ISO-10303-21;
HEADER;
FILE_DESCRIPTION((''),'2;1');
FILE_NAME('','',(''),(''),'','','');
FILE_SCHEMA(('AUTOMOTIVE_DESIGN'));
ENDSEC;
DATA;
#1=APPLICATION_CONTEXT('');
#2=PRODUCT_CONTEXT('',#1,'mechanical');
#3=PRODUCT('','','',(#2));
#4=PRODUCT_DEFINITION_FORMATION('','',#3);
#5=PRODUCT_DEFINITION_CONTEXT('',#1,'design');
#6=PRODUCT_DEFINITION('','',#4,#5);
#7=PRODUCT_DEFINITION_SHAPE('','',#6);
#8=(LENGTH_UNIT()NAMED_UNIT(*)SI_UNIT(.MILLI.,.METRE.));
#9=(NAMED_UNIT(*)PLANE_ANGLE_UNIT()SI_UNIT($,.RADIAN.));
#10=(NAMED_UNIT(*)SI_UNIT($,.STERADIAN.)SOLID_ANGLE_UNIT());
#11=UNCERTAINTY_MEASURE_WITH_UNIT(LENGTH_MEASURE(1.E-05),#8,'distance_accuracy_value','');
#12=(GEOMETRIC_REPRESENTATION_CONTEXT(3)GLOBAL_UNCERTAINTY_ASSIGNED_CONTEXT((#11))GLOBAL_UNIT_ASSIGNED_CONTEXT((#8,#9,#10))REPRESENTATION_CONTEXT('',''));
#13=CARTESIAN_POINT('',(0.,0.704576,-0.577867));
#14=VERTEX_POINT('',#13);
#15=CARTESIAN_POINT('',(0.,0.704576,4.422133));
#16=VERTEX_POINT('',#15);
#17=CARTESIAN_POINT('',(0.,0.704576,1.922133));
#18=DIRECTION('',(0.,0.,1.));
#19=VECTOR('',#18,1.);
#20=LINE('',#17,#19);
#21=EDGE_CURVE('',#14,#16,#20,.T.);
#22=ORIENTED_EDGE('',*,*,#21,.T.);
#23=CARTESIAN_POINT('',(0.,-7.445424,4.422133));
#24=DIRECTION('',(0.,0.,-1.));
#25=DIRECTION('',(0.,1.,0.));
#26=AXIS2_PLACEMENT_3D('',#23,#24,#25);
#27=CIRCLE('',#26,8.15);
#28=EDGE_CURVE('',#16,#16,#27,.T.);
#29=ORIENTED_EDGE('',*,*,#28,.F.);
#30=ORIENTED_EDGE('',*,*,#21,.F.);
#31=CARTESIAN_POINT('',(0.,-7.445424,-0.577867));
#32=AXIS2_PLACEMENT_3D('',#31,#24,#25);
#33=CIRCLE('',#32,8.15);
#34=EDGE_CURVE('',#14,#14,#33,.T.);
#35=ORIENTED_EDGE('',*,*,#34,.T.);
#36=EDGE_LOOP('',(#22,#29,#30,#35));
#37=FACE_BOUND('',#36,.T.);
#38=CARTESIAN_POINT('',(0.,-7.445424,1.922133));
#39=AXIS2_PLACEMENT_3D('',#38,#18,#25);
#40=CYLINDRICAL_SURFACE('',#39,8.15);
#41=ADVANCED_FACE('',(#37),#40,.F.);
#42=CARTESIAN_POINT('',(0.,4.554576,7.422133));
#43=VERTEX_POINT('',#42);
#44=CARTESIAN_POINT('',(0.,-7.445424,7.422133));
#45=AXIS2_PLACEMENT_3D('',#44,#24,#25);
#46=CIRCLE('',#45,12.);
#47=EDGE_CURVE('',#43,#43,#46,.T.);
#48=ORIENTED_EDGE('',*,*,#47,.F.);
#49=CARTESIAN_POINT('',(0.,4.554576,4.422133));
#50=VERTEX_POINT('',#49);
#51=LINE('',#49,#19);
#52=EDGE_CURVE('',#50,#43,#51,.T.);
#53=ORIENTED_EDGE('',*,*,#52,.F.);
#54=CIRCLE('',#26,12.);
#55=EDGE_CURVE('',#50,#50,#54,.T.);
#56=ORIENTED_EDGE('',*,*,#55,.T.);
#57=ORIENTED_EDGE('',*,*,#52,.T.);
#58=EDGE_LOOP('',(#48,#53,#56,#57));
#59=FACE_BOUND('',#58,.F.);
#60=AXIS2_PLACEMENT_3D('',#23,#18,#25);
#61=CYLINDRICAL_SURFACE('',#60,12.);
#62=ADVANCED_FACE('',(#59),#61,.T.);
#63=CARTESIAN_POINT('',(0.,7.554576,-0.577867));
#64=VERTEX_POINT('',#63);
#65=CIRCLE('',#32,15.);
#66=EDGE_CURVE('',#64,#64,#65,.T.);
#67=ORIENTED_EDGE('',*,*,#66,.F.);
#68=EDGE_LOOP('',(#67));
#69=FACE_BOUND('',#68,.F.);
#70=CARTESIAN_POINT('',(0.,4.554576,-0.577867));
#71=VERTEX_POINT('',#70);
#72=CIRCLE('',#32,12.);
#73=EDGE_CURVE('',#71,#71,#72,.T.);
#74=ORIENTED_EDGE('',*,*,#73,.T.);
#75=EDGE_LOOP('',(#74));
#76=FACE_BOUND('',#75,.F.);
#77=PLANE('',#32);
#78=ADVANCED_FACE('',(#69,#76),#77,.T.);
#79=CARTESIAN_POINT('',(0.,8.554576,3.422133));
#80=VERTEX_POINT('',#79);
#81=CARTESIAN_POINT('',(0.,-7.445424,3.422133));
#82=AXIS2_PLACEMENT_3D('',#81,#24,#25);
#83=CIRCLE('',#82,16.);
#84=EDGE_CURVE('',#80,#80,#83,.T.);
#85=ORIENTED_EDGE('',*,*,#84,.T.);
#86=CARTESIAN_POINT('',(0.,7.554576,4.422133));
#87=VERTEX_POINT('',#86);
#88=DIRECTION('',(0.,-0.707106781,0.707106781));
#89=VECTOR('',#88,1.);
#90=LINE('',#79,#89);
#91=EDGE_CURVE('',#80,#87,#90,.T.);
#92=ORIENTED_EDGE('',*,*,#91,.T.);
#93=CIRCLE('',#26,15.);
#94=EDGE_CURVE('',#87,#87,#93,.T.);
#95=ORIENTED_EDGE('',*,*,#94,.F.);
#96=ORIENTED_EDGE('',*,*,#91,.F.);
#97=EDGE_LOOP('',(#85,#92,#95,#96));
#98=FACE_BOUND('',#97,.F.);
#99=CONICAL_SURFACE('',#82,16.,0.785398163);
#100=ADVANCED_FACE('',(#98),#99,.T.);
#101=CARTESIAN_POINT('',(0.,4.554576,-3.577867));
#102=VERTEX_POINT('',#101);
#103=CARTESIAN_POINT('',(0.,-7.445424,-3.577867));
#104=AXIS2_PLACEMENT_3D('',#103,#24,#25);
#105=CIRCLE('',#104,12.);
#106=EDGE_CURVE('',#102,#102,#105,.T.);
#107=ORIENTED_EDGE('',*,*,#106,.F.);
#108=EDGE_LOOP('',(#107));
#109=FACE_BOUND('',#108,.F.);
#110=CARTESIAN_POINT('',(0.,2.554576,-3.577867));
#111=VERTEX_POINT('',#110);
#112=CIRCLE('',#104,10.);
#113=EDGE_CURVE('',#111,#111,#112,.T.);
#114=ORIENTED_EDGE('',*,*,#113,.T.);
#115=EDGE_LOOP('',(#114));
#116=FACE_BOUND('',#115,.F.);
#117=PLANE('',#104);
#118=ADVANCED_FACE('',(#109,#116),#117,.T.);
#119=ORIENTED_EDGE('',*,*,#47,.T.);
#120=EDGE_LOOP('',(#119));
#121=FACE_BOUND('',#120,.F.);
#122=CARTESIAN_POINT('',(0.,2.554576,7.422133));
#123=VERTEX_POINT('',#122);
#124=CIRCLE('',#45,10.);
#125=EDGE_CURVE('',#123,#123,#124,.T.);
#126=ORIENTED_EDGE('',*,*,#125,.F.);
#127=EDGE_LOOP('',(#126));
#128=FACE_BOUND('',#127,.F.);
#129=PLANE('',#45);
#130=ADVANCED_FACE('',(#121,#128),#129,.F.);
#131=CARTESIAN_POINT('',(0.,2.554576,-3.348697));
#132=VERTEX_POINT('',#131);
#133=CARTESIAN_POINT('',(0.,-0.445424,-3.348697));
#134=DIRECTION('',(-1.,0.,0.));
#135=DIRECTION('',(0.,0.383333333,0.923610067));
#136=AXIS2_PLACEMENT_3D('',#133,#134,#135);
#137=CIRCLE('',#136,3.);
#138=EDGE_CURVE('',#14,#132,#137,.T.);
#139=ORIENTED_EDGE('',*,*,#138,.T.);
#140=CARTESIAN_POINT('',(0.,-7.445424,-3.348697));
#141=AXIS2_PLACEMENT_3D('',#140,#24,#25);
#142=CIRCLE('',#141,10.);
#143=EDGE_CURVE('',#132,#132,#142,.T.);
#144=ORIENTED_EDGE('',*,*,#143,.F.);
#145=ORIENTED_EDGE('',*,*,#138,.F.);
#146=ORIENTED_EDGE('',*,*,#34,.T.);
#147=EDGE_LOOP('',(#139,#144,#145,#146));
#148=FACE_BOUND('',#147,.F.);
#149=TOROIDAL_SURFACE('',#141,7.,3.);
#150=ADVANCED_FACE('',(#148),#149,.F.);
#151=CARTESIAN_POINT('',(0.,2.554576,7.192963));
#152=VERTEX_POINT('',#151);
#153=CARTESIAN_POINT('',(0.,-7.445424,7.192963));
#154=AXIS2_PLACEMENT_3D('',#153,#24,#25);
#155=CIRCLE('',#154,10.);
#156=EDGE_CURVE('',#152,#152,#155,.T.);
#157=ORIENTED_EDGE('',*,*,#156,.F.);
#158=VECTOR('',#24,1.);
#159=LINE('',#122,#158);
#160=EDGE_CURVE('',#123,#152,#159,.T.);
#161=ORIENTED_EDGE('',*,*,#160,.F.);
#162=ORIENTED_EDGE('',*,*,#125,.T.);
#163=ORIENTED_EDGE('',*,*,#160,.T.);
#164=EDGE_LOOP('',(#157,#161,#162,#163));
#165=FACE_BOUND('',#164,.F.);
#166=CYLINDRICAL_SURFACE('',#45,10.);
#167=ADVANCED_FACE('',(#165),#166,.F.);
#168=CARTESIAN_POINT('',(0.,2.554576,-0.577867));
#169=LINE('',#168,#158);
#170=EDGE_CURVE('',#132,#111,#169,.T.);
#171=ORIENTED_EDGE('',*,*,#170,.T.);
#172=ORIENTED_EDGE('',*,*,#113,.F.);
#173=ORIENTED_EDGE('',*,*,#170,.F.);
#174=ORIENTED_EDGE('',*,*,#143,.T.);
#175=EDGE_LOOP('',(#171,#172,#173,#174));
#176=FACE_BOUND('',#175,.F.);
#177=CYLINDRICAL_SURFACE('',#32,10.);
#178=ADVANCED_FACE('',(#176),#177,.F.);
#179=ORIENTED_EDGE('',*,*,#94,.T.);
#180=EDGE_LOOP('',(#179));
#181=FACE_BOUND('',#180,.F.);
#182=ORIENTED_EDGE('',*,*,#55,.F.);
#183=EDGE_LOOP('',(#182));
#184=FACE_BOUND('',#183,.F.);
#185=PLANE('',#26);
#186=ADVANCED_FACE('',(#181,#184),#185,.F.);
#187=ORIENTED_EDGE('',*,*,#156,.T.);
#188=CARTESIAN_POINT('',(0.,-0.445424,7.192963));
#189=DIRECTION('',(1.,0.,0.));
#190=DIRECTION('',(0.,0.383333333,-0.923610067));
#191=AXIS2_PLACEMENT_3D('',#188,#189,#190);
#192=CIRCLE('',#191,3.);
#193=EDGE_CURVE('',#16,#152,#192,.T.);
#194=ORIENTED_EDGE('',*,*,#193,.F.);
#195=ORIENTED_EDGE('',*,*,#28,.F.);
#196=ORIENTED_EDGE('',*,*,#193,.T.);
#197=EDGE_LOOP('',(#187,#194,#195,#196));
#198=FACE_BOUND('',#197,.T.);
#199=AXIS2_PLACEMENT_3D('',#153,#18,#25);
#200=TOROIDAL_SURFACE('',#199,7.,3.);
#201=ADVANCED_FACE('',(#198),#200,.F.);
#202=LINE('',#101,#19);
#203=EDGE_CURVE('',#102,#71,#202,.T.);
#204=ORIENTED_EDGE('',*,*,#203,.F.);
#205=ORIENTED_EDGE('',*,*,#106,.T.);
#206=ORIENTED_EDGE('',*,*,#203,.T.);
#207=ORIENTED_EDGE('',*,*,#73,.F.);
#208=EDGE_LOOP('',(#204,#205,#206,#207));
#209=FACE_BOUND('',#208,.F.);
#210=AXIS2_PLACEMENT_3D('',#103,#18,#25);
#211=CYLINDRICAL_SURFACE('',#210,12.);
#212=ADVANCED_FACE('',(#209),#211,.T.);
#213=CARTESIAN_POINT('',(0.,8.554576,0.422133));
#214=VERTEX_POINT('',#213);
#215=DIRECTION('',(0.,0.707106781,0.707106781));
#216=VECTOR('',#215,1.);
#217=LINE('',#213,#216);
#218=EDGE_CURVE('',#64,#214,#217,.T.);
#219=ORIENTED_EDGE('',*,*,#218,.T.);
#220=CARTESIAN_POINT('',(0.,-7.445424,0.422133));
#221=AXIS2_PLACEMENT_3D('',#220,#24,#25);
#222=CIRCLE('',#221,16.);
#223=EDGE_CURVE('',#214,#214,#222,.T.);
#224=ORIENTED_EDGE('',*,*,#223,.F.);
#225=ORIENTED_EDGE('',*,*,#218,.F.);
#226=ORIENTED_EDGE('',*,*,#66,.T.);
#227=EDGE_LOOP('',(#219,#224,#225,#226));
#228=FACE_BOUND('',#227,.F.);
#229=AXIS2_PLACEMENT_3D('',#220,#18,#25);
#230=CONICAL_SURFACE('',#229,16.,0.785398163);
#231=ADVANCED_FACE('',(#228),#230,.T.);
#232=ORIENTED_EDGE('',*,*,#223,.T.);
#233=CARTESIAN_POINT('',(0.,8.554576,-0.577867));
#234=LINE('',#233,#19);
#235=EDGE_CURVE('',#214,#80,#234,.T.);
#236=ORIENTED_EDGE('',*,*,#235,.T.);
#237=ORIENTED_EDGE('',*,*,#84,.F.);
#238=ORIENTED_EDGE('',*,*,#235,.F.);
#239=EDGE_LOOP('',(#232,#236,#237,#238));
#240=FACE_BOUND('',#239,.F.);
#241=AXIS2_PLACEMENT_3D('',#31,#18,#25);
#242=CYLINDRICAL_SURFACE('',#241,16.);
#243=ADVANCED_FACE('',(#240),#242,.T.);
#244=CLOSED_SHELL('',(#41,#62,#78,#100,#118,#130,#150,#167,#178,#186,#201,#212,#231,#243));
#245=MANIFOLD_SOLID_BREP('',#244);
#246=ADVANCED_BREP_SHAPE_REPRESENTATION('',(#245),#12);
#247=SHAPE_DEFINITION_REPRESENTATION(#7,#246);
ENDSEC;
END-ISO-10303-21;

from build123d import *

# Parameters (mm, degrees)
F0_W    = 1.85
F0_H    = 5
F3_SIZE = 1


# Not quite as in the source:
# - a fillet or chamfer that OpenCascade refuses, or shapes differently, is made with other operations: its cross-section is extruded or revolved along the edge and cut away or added


with BuildPart() as f1:
    # F0 (on Right) → F1 (revolve)
    with BuildSketch(Plane.YZ):
        with Locations((1.6295755848, 1.9221331838)):
            Rectangle(F0_W, F0_H)
        Polygon((2.5545755848, 7.4221331838), (2.5545755848, 4.4221331838), (2.5545755848, -0.5778668162), (2.5545755848, -3.5778668162), (4.5545755848, -3.5778668162), (4.5545755848, -0.5778668162), (8.5545755848, -0.5778668162), (8.5545755848, 4.4221331838), (4.5545755848, 4.4221331838), (4.5545755848, 7.4221331838), align=None)
    revolve(axis=Axis((0, -7.4454244152, 1.9221331838), (0, 0, -1)))

    # F2: fillet of radius 3 on 2 edges, made by hand

    # F2_s1 → F2_t2 (revolve)
    with BuildSketch(Plane.YZ):
        with BuildLine():
            ThreePointArc((0.7045755848, 4.4221331838), (2.0495705748, 5.5271302594), (2.5545755848, 7.1929633843))
            Line((2.5545755848, 7.1929633843), (2.5545755848, 4.4221331838))
            Line((2.5545755848, 4.4221331838), (0.7045755848, 4.4221331838))
        make_face()
    revolve(axis=Axis((0, -7.4454244152, 4.4221331838), (0, 0, -1)))

    # F2_s3 → F2_t4 (revolve)
    with BuildSketch(Plane.YZ):
        with BuildLine():
            ThreePointArc((0.7045755848, -0.5778668162), (2.0495705748, -1.6828638918), (2.5545755848, -3.3486970167))
            Line((2.5545755848, -3.3486970167), (2.5545755848, -0.5778668162))
            Line((2.5545755848, -0.5778668162), (0.7045755848, -0.5778668162))
        make_face()
    revolve(axis=Axis((0, -7.4454244152, -0.5778668162), (0, 0, -1)))

    # F3
    f3_edges = [f1.edges().sort_by_distance(p)[0] for p in [
        (0, -23.445424, -0.577867),
        (0, -23.445424, 4.422133),
    ]]
    chamfer(f3_edges, length=F3_SIZE)


solid = f1.part
